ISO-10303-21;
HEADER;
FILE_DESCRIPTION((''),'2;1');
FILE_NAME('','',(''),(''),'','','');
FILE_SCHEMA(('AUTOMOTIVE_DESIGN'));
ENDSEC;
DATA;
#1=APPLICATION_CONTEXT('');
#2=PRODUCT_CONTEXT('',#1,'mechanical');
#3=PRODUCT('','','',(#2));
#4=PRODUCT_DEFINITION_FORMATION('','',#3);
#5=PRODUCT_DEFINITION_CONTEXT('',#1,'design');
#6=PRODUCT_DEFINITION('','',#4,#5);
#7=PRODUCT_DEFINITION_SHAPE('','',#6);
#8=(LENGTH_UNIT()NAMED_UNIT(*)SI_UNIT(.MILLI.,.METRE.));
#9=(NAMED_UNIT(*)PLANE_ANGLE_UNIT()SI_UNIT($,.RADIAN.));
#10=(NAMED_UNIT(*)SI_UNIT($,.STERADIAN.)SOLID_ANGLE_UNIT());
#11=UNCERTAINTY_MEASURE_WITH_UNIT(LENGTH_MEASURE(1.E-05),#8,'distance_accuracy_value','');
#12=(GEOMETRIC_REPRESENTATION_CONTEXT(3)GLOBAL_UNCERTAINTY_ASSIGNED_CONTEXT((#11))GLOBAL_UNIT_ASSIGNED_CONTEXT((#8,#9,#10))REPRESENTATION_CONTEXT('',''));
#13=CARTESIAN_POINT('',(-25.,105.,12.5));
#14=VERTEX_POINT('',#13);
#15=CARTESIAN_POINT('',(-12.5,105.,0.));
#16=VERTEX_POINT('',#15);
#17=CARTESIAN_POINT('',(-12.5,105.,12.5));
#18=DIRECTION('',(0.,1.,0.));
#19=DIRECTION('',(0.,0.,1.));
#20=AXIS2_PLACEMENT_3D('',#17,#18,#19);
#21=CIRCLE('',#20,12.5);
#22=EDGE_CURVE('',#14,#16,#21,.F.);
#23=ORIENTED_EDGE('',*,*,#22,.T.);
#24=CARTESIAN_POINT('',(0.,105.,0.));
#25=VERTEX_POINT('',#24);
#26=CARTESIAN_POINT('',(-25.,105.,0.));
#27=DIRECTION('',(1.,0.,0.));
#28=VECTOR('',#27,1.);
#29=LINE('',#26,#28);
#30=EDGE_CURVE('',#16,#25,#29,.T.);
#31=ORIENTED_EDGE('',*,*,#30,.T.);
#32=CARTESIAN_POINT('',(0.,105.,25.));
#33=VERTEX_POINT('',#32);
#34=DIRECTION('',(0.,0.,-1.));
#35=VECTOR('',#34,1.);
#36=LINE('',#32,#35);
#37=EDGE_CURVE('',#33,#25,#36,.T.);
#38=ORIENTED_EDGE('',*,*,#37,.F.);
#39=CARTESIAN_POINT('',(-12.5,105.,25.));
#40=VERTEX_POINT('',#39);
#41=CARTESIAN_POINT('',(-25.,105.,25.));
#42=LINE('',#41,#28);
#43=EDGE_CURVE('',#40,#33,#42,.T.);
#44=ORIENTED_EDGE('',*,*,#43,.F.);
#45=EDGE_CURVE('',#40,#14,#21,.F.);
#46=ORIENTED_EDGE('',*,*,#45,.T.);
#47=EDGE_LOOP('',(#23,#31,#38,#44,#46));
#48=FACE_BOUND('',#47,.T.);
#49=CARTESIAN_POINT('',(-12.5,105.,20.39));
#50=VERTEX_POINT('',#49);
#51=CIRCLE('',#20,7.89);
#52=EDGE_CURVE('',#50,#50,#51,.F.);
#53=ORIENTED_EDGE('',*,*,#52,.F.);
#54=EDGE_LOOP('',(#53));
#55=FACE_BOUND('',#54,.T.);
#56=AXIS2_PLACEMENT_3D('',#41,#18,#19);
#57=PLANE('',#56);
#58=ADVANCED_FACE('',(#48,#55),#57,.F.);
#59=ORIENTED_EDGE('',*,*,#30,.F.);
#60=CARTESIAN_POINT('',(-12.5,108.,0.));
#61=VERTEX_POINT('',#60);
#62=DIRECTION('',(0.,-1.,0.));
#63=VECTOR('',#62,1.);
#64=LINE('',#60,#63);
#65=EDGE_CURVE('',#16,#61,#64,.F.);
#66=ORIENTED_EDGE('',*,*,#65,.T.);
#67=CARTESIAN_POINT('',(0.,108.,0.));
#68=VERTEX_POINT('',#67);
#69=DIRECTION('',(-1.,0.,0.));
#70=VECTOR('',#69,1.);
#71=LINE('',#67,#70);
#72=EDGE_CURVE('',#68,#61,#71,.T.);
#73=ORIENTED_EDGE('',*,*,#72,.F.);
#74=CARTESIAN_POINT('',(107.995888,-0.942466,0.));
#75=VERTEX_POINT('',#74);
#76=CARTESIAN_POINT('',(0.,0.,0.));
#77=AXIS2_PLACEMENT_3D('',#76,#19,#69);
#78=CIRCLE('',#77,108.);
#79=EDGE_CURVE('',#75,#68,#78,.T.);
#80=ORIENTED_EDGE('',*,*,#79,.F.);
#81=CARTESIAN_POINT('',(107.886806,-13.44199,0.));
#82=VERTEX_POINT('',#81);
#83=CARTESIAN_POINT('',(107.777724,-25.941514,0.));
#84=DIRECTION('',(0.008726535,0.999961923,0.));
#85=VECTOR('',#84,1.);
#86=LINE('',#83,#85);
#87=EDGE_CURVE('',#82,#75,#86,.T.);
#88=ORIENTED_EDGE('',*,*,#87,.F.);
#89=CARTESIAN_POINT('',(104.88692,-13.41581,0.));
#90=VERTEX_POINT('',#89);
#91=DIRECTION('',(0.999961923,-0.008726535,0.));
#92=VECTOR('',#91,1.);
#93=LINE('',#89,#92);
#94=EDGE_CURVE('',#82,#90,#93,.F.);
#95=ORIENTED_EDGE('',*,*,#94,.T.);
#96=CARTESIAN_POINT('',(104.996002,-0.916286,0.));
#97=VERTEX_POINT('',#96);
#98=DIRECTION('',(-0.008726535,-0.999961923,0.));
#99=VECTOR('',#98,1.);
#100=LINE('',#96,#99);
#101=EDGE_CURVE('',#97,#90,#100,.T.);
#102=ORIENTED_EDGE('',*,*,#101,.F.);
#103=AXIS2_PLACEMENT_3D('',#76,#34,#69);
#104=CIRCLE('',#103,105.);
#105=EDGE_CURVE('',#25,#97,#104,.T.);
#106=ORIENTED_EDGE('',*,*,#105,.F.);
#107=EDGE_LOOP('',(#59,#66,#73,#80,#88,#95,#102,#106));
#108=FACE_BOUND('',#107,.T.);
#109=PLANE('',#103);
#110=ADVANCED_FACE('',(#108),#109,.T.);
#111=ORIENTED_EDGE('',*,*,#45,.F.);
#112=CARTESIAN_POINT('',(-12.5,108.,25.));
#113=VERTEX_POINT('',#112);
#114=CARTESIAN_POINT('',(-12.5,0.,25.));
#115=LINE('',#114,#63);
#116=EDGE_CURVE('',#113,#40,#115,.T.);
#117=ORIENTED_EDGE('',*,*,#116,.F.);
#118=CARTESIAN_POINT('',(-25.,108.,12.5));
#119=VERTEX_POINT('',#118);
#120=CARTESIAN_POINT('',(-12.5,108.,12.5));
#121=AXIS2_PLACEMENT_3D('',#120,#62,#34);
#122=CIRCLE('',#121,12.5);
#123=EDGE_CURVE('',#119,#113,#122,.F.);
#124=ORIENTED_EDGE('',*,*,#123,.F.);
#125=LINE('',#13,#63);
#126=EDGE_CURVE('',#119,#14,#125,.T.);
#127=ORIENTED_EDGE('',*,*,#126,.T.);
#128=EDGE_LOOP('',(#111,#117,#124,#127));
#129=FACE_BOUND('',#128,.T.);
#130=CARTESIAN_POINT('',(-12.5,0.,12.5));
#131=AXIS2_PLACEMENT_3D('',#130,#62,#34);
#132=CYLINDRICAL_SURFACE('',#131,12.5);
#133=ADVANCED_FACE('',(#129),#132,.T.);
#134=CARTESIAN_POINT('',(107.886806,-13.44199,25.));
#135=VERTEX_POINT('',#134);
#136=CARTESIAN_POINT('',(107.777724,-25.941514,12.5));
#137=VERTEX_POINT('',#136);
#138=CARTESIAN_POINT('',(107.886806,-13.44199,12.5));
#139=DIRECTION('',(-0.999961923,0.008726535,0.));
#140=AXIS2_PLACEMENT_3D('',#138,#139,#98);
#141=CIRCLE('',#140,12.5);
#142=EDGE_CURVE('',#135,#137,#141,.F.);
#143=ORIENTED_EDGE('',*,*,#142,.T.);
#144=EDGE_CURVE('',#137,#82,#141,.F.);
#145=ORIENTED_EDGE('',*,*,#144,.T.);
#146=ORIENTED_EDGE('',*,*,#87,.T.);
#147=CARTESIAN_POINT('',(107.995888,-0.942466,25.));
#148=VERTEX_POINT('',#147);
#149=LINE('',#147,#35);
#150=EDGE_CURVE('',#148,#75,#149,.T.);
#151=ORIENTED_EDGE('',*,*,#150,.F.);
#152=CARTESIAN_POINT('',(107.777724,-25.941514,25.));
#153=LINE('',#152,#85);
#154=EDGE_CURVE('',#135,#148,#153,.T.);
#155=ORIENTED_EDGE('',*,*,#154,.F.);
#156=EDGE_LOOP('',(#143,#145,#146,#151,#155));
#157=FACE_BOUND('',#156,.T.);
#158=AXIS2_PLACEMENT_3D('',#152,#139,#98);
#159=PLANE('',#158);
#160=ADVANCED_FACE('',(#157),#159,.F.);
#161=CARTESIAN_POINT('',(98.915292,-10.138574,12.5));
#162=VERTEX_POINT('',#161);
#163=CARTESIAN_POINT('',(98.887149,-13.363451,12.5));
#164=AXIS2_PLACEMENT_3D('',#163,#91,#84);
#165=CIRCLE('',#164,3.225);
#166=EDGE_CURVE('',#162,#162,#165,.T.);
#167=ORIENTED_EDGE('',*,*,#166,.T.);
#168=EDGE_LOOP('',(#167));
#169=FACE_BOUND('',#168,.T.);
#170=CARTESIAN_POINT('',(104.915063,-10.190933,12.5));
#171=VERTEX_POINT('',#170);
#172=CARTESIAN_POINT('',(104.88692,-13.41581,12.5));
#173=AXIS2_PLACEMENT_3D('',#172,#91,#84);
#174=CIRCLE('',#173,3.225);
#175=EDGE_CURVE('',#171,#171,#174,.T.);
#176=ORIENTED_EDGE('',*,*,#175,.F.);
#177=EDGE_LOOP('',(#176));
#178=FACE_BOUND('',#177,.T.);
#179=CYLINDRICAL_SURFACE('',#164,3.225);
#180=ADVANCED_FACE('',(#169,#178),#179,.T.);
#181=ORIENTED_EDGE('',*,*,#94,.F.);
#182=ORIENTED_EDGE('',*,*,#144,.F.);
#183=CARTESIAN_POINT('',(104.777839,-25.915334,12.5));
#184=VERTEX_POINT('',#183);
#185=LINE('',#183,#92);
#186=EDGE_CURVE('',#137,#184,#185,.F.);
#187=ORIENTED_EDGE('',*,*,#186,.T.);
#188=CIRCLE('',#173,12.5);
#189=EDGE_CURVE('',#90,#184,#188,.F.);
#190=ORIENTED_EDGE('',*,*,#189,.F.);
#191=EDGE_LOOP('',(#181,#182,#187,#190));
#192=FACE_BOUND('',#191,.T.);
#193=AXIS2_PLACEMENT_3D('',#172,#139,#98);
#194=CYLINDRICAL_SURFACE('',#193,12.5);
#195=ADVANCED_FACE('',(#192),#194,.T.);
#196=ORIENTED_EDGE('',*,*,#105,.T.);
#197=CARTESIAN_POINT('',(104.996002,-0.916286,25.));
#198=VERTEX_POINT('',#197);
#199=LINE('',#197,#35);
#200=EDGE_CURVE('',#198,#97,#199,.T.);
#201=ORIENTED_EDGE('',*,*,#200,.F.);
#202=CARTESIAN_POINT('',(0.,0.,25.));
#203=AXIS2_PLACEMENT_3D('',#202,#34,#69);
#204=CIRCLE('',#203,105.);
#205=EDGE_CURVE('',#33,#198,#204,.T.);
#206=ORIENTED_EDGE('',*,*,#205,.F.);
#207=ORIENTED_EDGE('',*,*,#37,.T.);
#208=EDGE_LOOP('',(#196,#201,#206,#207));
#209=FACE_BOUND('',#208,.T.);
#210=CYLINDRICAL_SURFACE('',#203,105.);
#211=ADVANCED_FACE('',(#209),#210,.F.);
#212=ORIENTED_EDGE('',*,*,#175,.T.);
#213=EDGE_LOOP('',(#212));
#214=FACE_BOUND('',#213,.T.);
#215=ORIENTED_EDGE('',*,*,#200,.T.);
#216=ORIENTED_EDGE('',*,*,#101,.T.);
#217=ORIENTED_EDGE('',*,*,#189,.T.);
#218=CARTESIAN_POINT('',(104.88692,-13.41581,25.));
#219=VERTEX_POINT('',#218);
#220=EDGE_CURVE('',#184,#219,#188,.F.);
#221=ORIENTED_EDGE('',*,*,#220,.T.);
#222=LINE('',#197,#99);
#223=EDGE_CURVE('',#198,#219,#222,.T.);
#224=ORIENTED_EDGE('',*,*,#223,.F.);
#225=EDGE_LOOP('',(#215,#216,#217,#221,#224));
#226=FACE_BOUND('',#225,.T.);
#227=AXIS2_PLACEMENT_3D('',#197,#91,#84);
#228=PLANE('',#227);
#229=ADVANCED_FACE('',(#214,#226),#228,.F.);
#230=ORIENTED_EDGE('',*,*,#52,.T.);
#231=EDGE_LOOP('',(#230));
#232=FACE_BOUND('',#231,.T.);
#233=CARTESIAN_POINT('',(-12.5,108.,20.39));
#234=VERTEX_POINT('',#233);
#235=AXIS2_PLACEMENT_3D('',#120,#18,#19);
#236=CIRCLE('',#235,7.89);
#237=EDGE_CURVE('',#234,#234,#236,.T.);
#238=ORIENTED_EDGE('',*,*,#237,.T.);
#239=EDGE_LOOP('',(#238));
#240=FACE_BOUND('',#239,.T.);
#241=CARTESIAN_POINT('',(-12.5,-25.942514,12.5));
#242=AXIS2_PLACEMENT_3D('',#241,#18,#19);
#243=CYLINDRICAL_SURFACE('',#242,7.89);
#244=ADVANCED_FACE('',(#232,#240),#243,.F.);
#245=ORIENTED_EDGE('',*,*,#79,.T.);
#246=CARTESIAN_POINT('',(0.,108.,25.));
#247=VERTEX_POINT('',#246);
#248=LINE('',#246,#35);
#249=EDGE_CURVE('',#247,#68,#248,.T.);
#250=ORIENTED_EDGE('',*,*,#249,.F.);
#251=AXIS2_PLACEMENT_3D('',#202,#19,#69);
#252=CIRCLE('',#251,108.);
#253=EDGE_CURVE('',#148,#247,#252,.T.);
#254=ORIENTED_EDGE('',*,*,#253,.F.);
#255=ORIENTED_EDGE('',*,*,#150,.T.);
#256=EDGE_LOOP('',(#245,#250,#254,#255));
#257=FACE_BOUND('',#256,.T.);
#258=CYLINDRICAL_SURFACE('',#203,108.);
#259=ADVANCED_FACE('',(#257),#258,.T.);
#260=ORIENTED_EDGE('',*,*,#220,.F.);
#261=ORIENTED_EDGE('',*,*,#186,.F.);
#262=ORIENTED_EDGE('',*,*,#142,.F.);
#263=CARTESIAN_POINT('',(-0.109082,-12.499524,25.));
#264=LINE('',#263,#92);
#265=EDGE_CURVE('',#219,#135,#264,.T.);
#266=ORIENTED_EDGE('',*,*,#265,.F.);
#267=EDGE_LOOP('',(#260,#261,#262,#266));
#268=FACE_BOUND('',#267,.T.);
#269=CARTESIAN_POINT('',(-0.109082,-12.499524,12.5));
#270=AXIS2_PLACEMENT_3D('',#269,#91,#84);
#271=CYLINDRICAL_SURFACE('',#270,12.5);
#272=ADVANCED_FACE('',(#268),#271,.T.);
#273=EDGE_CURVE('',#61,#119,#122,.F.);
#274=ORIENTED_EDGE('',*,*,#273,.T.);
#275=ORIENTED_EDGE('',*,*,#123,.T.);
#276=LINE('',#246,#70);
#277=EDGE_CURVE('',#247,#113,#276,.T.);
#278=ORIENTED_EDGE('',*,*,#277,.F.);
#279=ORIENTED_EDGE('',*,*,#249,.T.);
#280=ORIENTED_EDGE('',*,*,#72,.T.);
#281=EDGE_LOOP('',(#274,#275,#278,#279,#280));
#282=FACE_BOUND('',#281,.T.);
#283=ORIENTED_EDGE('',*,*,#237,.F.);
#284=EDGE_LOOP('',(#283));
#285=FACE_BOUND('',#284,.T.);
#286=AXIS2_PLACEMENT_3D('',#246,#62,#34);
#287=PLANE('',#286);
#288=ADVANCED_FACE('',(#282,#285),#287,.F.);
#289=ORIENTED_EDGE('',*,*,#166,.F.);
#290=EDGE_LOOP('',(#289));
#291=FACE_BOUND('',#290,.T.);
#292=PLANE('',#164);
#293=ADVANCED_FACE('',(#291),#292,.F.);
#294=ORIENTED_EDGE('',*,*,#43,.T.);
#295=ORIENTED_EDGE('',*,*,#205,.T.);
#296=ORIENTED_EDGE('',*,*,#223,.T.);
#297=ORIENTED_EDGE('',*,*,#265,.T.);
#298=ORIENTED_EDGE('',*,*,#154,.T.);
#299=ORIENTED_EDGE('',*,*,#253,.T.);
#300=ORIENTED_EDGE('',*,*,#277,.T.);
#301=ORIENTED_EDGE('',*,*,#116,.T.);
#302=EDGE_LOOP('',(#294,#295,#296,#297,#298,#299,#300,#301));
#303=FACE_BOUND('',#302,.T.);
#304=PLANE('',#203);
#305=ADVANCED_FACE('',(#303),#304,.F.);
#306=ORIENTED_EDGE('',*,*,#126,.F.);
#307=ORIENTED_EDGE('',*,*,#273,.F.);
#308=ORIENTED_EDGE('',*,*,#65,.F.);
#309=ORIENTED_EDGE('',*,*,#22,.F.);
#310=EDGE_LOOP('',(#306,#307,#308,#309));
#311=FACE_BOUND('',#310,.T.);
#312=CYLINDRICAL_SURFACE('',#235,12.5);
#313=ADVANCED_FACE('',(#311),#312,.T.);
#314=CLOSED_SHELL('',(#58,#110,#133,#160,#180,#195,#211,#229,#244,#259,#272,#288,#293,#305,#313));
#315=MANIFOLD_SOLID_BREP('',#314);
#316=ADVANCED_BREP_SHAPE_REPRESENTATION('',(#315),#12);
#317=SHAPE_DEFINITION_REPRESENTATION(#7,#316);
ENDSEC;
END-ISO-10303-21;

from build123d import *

# Parameters (mm, degrees)
BOSS_EXTRUDE1_DEPTH = 25
FILLET1_R           = 12.5
CUT_EXTRUDE1_REACH  = 175.866
SKETCH3_R           = 7.89
SKETCH4_R           = 3.225
BOSS_EXTRUDE2_DEPTH = 6


with BuildPart() as part:
    # Sketch2 → Boss-Extrude1 (new body)
    with BuildSketch(Plane.XY):
        with BuildLine():
            Line((0, 108), (-25, 108))
            Line((-25, 108), (-25, 105))
            Line((-25, 105), (0, 105))
            ThreePointArc((0, 105), (74.56946444, 73.921546068), (104.996001922, -0.916286227))
            Line((104.996001922, -0.916286227), (104.777838534, -25.915334304))
            Line((104.777838534, -25.915334304), (107.777724303, -25.94151391))
            Line((107.777724303, -25.94151391), (107.995887691, -0.942465834))
            ThreePointArc((107.995887691, -0.942465834), (76.700020567, 76.033590241), (0, 108))
        make_face()
    extrude(amount=BOSS_EXTRUDE1_DEPTH)

    # Fillet1
    fillet1_edges = [part.edges().sort_by_distance(p)[0] for p in [
        (106.277781419, -25.928424107, 0),
        (106.277781419, -25.928424107, 25),
        (-25, 106.5, 25),
        (-25, 106.5, 0),
    ]]
    fillet(fillet1_edges, radius=FILLET1_R - 0.0001)  # a hair under: the kernel refuses the full size

    # Sketch3 → Cut-Extrude1 (cut, up to next)
    with BuildSketch(Plane(origin=(0, 108, 0), x_dir=(1, 0, 0), z_dir=(0, 1, 0)), mode=Mode.PRIVATE) as cut_extrude1_sk1:
        with Locations(Location((-12.5, -12.5, 0), (0, 0, 270))):
            Circle(SKETCH3_R)
    cut_extrude1_tool1 = extrude(cut_extrude1_sk1.sketch, amount=-CUT_EXTRUDE1_REACH, mode=Mode.PRIVATE) & part.part
    add(cut_extrude1_tool1.solids().sort_by_distance((-12.5, 108, 12.5))[0], mode=Mode.SUBTRACT)

    # Sketch4 → Boss-Extrude2 (add)
    with BuildSketch(Plane(origin=(104.996001922, -0.916286227, 0), x_dir=(0, 0, -1), z_dir=(0.9999619230641714, -0.008726535498378436, 0))):
        with Locations(Location((-12.5, -12.5, 0), (0, 0, 90))):
            Circle(SKETCH4_R)
    extrude(amount=-BOSS_EXTRUDE2_DEPTH)


solid = part.part
